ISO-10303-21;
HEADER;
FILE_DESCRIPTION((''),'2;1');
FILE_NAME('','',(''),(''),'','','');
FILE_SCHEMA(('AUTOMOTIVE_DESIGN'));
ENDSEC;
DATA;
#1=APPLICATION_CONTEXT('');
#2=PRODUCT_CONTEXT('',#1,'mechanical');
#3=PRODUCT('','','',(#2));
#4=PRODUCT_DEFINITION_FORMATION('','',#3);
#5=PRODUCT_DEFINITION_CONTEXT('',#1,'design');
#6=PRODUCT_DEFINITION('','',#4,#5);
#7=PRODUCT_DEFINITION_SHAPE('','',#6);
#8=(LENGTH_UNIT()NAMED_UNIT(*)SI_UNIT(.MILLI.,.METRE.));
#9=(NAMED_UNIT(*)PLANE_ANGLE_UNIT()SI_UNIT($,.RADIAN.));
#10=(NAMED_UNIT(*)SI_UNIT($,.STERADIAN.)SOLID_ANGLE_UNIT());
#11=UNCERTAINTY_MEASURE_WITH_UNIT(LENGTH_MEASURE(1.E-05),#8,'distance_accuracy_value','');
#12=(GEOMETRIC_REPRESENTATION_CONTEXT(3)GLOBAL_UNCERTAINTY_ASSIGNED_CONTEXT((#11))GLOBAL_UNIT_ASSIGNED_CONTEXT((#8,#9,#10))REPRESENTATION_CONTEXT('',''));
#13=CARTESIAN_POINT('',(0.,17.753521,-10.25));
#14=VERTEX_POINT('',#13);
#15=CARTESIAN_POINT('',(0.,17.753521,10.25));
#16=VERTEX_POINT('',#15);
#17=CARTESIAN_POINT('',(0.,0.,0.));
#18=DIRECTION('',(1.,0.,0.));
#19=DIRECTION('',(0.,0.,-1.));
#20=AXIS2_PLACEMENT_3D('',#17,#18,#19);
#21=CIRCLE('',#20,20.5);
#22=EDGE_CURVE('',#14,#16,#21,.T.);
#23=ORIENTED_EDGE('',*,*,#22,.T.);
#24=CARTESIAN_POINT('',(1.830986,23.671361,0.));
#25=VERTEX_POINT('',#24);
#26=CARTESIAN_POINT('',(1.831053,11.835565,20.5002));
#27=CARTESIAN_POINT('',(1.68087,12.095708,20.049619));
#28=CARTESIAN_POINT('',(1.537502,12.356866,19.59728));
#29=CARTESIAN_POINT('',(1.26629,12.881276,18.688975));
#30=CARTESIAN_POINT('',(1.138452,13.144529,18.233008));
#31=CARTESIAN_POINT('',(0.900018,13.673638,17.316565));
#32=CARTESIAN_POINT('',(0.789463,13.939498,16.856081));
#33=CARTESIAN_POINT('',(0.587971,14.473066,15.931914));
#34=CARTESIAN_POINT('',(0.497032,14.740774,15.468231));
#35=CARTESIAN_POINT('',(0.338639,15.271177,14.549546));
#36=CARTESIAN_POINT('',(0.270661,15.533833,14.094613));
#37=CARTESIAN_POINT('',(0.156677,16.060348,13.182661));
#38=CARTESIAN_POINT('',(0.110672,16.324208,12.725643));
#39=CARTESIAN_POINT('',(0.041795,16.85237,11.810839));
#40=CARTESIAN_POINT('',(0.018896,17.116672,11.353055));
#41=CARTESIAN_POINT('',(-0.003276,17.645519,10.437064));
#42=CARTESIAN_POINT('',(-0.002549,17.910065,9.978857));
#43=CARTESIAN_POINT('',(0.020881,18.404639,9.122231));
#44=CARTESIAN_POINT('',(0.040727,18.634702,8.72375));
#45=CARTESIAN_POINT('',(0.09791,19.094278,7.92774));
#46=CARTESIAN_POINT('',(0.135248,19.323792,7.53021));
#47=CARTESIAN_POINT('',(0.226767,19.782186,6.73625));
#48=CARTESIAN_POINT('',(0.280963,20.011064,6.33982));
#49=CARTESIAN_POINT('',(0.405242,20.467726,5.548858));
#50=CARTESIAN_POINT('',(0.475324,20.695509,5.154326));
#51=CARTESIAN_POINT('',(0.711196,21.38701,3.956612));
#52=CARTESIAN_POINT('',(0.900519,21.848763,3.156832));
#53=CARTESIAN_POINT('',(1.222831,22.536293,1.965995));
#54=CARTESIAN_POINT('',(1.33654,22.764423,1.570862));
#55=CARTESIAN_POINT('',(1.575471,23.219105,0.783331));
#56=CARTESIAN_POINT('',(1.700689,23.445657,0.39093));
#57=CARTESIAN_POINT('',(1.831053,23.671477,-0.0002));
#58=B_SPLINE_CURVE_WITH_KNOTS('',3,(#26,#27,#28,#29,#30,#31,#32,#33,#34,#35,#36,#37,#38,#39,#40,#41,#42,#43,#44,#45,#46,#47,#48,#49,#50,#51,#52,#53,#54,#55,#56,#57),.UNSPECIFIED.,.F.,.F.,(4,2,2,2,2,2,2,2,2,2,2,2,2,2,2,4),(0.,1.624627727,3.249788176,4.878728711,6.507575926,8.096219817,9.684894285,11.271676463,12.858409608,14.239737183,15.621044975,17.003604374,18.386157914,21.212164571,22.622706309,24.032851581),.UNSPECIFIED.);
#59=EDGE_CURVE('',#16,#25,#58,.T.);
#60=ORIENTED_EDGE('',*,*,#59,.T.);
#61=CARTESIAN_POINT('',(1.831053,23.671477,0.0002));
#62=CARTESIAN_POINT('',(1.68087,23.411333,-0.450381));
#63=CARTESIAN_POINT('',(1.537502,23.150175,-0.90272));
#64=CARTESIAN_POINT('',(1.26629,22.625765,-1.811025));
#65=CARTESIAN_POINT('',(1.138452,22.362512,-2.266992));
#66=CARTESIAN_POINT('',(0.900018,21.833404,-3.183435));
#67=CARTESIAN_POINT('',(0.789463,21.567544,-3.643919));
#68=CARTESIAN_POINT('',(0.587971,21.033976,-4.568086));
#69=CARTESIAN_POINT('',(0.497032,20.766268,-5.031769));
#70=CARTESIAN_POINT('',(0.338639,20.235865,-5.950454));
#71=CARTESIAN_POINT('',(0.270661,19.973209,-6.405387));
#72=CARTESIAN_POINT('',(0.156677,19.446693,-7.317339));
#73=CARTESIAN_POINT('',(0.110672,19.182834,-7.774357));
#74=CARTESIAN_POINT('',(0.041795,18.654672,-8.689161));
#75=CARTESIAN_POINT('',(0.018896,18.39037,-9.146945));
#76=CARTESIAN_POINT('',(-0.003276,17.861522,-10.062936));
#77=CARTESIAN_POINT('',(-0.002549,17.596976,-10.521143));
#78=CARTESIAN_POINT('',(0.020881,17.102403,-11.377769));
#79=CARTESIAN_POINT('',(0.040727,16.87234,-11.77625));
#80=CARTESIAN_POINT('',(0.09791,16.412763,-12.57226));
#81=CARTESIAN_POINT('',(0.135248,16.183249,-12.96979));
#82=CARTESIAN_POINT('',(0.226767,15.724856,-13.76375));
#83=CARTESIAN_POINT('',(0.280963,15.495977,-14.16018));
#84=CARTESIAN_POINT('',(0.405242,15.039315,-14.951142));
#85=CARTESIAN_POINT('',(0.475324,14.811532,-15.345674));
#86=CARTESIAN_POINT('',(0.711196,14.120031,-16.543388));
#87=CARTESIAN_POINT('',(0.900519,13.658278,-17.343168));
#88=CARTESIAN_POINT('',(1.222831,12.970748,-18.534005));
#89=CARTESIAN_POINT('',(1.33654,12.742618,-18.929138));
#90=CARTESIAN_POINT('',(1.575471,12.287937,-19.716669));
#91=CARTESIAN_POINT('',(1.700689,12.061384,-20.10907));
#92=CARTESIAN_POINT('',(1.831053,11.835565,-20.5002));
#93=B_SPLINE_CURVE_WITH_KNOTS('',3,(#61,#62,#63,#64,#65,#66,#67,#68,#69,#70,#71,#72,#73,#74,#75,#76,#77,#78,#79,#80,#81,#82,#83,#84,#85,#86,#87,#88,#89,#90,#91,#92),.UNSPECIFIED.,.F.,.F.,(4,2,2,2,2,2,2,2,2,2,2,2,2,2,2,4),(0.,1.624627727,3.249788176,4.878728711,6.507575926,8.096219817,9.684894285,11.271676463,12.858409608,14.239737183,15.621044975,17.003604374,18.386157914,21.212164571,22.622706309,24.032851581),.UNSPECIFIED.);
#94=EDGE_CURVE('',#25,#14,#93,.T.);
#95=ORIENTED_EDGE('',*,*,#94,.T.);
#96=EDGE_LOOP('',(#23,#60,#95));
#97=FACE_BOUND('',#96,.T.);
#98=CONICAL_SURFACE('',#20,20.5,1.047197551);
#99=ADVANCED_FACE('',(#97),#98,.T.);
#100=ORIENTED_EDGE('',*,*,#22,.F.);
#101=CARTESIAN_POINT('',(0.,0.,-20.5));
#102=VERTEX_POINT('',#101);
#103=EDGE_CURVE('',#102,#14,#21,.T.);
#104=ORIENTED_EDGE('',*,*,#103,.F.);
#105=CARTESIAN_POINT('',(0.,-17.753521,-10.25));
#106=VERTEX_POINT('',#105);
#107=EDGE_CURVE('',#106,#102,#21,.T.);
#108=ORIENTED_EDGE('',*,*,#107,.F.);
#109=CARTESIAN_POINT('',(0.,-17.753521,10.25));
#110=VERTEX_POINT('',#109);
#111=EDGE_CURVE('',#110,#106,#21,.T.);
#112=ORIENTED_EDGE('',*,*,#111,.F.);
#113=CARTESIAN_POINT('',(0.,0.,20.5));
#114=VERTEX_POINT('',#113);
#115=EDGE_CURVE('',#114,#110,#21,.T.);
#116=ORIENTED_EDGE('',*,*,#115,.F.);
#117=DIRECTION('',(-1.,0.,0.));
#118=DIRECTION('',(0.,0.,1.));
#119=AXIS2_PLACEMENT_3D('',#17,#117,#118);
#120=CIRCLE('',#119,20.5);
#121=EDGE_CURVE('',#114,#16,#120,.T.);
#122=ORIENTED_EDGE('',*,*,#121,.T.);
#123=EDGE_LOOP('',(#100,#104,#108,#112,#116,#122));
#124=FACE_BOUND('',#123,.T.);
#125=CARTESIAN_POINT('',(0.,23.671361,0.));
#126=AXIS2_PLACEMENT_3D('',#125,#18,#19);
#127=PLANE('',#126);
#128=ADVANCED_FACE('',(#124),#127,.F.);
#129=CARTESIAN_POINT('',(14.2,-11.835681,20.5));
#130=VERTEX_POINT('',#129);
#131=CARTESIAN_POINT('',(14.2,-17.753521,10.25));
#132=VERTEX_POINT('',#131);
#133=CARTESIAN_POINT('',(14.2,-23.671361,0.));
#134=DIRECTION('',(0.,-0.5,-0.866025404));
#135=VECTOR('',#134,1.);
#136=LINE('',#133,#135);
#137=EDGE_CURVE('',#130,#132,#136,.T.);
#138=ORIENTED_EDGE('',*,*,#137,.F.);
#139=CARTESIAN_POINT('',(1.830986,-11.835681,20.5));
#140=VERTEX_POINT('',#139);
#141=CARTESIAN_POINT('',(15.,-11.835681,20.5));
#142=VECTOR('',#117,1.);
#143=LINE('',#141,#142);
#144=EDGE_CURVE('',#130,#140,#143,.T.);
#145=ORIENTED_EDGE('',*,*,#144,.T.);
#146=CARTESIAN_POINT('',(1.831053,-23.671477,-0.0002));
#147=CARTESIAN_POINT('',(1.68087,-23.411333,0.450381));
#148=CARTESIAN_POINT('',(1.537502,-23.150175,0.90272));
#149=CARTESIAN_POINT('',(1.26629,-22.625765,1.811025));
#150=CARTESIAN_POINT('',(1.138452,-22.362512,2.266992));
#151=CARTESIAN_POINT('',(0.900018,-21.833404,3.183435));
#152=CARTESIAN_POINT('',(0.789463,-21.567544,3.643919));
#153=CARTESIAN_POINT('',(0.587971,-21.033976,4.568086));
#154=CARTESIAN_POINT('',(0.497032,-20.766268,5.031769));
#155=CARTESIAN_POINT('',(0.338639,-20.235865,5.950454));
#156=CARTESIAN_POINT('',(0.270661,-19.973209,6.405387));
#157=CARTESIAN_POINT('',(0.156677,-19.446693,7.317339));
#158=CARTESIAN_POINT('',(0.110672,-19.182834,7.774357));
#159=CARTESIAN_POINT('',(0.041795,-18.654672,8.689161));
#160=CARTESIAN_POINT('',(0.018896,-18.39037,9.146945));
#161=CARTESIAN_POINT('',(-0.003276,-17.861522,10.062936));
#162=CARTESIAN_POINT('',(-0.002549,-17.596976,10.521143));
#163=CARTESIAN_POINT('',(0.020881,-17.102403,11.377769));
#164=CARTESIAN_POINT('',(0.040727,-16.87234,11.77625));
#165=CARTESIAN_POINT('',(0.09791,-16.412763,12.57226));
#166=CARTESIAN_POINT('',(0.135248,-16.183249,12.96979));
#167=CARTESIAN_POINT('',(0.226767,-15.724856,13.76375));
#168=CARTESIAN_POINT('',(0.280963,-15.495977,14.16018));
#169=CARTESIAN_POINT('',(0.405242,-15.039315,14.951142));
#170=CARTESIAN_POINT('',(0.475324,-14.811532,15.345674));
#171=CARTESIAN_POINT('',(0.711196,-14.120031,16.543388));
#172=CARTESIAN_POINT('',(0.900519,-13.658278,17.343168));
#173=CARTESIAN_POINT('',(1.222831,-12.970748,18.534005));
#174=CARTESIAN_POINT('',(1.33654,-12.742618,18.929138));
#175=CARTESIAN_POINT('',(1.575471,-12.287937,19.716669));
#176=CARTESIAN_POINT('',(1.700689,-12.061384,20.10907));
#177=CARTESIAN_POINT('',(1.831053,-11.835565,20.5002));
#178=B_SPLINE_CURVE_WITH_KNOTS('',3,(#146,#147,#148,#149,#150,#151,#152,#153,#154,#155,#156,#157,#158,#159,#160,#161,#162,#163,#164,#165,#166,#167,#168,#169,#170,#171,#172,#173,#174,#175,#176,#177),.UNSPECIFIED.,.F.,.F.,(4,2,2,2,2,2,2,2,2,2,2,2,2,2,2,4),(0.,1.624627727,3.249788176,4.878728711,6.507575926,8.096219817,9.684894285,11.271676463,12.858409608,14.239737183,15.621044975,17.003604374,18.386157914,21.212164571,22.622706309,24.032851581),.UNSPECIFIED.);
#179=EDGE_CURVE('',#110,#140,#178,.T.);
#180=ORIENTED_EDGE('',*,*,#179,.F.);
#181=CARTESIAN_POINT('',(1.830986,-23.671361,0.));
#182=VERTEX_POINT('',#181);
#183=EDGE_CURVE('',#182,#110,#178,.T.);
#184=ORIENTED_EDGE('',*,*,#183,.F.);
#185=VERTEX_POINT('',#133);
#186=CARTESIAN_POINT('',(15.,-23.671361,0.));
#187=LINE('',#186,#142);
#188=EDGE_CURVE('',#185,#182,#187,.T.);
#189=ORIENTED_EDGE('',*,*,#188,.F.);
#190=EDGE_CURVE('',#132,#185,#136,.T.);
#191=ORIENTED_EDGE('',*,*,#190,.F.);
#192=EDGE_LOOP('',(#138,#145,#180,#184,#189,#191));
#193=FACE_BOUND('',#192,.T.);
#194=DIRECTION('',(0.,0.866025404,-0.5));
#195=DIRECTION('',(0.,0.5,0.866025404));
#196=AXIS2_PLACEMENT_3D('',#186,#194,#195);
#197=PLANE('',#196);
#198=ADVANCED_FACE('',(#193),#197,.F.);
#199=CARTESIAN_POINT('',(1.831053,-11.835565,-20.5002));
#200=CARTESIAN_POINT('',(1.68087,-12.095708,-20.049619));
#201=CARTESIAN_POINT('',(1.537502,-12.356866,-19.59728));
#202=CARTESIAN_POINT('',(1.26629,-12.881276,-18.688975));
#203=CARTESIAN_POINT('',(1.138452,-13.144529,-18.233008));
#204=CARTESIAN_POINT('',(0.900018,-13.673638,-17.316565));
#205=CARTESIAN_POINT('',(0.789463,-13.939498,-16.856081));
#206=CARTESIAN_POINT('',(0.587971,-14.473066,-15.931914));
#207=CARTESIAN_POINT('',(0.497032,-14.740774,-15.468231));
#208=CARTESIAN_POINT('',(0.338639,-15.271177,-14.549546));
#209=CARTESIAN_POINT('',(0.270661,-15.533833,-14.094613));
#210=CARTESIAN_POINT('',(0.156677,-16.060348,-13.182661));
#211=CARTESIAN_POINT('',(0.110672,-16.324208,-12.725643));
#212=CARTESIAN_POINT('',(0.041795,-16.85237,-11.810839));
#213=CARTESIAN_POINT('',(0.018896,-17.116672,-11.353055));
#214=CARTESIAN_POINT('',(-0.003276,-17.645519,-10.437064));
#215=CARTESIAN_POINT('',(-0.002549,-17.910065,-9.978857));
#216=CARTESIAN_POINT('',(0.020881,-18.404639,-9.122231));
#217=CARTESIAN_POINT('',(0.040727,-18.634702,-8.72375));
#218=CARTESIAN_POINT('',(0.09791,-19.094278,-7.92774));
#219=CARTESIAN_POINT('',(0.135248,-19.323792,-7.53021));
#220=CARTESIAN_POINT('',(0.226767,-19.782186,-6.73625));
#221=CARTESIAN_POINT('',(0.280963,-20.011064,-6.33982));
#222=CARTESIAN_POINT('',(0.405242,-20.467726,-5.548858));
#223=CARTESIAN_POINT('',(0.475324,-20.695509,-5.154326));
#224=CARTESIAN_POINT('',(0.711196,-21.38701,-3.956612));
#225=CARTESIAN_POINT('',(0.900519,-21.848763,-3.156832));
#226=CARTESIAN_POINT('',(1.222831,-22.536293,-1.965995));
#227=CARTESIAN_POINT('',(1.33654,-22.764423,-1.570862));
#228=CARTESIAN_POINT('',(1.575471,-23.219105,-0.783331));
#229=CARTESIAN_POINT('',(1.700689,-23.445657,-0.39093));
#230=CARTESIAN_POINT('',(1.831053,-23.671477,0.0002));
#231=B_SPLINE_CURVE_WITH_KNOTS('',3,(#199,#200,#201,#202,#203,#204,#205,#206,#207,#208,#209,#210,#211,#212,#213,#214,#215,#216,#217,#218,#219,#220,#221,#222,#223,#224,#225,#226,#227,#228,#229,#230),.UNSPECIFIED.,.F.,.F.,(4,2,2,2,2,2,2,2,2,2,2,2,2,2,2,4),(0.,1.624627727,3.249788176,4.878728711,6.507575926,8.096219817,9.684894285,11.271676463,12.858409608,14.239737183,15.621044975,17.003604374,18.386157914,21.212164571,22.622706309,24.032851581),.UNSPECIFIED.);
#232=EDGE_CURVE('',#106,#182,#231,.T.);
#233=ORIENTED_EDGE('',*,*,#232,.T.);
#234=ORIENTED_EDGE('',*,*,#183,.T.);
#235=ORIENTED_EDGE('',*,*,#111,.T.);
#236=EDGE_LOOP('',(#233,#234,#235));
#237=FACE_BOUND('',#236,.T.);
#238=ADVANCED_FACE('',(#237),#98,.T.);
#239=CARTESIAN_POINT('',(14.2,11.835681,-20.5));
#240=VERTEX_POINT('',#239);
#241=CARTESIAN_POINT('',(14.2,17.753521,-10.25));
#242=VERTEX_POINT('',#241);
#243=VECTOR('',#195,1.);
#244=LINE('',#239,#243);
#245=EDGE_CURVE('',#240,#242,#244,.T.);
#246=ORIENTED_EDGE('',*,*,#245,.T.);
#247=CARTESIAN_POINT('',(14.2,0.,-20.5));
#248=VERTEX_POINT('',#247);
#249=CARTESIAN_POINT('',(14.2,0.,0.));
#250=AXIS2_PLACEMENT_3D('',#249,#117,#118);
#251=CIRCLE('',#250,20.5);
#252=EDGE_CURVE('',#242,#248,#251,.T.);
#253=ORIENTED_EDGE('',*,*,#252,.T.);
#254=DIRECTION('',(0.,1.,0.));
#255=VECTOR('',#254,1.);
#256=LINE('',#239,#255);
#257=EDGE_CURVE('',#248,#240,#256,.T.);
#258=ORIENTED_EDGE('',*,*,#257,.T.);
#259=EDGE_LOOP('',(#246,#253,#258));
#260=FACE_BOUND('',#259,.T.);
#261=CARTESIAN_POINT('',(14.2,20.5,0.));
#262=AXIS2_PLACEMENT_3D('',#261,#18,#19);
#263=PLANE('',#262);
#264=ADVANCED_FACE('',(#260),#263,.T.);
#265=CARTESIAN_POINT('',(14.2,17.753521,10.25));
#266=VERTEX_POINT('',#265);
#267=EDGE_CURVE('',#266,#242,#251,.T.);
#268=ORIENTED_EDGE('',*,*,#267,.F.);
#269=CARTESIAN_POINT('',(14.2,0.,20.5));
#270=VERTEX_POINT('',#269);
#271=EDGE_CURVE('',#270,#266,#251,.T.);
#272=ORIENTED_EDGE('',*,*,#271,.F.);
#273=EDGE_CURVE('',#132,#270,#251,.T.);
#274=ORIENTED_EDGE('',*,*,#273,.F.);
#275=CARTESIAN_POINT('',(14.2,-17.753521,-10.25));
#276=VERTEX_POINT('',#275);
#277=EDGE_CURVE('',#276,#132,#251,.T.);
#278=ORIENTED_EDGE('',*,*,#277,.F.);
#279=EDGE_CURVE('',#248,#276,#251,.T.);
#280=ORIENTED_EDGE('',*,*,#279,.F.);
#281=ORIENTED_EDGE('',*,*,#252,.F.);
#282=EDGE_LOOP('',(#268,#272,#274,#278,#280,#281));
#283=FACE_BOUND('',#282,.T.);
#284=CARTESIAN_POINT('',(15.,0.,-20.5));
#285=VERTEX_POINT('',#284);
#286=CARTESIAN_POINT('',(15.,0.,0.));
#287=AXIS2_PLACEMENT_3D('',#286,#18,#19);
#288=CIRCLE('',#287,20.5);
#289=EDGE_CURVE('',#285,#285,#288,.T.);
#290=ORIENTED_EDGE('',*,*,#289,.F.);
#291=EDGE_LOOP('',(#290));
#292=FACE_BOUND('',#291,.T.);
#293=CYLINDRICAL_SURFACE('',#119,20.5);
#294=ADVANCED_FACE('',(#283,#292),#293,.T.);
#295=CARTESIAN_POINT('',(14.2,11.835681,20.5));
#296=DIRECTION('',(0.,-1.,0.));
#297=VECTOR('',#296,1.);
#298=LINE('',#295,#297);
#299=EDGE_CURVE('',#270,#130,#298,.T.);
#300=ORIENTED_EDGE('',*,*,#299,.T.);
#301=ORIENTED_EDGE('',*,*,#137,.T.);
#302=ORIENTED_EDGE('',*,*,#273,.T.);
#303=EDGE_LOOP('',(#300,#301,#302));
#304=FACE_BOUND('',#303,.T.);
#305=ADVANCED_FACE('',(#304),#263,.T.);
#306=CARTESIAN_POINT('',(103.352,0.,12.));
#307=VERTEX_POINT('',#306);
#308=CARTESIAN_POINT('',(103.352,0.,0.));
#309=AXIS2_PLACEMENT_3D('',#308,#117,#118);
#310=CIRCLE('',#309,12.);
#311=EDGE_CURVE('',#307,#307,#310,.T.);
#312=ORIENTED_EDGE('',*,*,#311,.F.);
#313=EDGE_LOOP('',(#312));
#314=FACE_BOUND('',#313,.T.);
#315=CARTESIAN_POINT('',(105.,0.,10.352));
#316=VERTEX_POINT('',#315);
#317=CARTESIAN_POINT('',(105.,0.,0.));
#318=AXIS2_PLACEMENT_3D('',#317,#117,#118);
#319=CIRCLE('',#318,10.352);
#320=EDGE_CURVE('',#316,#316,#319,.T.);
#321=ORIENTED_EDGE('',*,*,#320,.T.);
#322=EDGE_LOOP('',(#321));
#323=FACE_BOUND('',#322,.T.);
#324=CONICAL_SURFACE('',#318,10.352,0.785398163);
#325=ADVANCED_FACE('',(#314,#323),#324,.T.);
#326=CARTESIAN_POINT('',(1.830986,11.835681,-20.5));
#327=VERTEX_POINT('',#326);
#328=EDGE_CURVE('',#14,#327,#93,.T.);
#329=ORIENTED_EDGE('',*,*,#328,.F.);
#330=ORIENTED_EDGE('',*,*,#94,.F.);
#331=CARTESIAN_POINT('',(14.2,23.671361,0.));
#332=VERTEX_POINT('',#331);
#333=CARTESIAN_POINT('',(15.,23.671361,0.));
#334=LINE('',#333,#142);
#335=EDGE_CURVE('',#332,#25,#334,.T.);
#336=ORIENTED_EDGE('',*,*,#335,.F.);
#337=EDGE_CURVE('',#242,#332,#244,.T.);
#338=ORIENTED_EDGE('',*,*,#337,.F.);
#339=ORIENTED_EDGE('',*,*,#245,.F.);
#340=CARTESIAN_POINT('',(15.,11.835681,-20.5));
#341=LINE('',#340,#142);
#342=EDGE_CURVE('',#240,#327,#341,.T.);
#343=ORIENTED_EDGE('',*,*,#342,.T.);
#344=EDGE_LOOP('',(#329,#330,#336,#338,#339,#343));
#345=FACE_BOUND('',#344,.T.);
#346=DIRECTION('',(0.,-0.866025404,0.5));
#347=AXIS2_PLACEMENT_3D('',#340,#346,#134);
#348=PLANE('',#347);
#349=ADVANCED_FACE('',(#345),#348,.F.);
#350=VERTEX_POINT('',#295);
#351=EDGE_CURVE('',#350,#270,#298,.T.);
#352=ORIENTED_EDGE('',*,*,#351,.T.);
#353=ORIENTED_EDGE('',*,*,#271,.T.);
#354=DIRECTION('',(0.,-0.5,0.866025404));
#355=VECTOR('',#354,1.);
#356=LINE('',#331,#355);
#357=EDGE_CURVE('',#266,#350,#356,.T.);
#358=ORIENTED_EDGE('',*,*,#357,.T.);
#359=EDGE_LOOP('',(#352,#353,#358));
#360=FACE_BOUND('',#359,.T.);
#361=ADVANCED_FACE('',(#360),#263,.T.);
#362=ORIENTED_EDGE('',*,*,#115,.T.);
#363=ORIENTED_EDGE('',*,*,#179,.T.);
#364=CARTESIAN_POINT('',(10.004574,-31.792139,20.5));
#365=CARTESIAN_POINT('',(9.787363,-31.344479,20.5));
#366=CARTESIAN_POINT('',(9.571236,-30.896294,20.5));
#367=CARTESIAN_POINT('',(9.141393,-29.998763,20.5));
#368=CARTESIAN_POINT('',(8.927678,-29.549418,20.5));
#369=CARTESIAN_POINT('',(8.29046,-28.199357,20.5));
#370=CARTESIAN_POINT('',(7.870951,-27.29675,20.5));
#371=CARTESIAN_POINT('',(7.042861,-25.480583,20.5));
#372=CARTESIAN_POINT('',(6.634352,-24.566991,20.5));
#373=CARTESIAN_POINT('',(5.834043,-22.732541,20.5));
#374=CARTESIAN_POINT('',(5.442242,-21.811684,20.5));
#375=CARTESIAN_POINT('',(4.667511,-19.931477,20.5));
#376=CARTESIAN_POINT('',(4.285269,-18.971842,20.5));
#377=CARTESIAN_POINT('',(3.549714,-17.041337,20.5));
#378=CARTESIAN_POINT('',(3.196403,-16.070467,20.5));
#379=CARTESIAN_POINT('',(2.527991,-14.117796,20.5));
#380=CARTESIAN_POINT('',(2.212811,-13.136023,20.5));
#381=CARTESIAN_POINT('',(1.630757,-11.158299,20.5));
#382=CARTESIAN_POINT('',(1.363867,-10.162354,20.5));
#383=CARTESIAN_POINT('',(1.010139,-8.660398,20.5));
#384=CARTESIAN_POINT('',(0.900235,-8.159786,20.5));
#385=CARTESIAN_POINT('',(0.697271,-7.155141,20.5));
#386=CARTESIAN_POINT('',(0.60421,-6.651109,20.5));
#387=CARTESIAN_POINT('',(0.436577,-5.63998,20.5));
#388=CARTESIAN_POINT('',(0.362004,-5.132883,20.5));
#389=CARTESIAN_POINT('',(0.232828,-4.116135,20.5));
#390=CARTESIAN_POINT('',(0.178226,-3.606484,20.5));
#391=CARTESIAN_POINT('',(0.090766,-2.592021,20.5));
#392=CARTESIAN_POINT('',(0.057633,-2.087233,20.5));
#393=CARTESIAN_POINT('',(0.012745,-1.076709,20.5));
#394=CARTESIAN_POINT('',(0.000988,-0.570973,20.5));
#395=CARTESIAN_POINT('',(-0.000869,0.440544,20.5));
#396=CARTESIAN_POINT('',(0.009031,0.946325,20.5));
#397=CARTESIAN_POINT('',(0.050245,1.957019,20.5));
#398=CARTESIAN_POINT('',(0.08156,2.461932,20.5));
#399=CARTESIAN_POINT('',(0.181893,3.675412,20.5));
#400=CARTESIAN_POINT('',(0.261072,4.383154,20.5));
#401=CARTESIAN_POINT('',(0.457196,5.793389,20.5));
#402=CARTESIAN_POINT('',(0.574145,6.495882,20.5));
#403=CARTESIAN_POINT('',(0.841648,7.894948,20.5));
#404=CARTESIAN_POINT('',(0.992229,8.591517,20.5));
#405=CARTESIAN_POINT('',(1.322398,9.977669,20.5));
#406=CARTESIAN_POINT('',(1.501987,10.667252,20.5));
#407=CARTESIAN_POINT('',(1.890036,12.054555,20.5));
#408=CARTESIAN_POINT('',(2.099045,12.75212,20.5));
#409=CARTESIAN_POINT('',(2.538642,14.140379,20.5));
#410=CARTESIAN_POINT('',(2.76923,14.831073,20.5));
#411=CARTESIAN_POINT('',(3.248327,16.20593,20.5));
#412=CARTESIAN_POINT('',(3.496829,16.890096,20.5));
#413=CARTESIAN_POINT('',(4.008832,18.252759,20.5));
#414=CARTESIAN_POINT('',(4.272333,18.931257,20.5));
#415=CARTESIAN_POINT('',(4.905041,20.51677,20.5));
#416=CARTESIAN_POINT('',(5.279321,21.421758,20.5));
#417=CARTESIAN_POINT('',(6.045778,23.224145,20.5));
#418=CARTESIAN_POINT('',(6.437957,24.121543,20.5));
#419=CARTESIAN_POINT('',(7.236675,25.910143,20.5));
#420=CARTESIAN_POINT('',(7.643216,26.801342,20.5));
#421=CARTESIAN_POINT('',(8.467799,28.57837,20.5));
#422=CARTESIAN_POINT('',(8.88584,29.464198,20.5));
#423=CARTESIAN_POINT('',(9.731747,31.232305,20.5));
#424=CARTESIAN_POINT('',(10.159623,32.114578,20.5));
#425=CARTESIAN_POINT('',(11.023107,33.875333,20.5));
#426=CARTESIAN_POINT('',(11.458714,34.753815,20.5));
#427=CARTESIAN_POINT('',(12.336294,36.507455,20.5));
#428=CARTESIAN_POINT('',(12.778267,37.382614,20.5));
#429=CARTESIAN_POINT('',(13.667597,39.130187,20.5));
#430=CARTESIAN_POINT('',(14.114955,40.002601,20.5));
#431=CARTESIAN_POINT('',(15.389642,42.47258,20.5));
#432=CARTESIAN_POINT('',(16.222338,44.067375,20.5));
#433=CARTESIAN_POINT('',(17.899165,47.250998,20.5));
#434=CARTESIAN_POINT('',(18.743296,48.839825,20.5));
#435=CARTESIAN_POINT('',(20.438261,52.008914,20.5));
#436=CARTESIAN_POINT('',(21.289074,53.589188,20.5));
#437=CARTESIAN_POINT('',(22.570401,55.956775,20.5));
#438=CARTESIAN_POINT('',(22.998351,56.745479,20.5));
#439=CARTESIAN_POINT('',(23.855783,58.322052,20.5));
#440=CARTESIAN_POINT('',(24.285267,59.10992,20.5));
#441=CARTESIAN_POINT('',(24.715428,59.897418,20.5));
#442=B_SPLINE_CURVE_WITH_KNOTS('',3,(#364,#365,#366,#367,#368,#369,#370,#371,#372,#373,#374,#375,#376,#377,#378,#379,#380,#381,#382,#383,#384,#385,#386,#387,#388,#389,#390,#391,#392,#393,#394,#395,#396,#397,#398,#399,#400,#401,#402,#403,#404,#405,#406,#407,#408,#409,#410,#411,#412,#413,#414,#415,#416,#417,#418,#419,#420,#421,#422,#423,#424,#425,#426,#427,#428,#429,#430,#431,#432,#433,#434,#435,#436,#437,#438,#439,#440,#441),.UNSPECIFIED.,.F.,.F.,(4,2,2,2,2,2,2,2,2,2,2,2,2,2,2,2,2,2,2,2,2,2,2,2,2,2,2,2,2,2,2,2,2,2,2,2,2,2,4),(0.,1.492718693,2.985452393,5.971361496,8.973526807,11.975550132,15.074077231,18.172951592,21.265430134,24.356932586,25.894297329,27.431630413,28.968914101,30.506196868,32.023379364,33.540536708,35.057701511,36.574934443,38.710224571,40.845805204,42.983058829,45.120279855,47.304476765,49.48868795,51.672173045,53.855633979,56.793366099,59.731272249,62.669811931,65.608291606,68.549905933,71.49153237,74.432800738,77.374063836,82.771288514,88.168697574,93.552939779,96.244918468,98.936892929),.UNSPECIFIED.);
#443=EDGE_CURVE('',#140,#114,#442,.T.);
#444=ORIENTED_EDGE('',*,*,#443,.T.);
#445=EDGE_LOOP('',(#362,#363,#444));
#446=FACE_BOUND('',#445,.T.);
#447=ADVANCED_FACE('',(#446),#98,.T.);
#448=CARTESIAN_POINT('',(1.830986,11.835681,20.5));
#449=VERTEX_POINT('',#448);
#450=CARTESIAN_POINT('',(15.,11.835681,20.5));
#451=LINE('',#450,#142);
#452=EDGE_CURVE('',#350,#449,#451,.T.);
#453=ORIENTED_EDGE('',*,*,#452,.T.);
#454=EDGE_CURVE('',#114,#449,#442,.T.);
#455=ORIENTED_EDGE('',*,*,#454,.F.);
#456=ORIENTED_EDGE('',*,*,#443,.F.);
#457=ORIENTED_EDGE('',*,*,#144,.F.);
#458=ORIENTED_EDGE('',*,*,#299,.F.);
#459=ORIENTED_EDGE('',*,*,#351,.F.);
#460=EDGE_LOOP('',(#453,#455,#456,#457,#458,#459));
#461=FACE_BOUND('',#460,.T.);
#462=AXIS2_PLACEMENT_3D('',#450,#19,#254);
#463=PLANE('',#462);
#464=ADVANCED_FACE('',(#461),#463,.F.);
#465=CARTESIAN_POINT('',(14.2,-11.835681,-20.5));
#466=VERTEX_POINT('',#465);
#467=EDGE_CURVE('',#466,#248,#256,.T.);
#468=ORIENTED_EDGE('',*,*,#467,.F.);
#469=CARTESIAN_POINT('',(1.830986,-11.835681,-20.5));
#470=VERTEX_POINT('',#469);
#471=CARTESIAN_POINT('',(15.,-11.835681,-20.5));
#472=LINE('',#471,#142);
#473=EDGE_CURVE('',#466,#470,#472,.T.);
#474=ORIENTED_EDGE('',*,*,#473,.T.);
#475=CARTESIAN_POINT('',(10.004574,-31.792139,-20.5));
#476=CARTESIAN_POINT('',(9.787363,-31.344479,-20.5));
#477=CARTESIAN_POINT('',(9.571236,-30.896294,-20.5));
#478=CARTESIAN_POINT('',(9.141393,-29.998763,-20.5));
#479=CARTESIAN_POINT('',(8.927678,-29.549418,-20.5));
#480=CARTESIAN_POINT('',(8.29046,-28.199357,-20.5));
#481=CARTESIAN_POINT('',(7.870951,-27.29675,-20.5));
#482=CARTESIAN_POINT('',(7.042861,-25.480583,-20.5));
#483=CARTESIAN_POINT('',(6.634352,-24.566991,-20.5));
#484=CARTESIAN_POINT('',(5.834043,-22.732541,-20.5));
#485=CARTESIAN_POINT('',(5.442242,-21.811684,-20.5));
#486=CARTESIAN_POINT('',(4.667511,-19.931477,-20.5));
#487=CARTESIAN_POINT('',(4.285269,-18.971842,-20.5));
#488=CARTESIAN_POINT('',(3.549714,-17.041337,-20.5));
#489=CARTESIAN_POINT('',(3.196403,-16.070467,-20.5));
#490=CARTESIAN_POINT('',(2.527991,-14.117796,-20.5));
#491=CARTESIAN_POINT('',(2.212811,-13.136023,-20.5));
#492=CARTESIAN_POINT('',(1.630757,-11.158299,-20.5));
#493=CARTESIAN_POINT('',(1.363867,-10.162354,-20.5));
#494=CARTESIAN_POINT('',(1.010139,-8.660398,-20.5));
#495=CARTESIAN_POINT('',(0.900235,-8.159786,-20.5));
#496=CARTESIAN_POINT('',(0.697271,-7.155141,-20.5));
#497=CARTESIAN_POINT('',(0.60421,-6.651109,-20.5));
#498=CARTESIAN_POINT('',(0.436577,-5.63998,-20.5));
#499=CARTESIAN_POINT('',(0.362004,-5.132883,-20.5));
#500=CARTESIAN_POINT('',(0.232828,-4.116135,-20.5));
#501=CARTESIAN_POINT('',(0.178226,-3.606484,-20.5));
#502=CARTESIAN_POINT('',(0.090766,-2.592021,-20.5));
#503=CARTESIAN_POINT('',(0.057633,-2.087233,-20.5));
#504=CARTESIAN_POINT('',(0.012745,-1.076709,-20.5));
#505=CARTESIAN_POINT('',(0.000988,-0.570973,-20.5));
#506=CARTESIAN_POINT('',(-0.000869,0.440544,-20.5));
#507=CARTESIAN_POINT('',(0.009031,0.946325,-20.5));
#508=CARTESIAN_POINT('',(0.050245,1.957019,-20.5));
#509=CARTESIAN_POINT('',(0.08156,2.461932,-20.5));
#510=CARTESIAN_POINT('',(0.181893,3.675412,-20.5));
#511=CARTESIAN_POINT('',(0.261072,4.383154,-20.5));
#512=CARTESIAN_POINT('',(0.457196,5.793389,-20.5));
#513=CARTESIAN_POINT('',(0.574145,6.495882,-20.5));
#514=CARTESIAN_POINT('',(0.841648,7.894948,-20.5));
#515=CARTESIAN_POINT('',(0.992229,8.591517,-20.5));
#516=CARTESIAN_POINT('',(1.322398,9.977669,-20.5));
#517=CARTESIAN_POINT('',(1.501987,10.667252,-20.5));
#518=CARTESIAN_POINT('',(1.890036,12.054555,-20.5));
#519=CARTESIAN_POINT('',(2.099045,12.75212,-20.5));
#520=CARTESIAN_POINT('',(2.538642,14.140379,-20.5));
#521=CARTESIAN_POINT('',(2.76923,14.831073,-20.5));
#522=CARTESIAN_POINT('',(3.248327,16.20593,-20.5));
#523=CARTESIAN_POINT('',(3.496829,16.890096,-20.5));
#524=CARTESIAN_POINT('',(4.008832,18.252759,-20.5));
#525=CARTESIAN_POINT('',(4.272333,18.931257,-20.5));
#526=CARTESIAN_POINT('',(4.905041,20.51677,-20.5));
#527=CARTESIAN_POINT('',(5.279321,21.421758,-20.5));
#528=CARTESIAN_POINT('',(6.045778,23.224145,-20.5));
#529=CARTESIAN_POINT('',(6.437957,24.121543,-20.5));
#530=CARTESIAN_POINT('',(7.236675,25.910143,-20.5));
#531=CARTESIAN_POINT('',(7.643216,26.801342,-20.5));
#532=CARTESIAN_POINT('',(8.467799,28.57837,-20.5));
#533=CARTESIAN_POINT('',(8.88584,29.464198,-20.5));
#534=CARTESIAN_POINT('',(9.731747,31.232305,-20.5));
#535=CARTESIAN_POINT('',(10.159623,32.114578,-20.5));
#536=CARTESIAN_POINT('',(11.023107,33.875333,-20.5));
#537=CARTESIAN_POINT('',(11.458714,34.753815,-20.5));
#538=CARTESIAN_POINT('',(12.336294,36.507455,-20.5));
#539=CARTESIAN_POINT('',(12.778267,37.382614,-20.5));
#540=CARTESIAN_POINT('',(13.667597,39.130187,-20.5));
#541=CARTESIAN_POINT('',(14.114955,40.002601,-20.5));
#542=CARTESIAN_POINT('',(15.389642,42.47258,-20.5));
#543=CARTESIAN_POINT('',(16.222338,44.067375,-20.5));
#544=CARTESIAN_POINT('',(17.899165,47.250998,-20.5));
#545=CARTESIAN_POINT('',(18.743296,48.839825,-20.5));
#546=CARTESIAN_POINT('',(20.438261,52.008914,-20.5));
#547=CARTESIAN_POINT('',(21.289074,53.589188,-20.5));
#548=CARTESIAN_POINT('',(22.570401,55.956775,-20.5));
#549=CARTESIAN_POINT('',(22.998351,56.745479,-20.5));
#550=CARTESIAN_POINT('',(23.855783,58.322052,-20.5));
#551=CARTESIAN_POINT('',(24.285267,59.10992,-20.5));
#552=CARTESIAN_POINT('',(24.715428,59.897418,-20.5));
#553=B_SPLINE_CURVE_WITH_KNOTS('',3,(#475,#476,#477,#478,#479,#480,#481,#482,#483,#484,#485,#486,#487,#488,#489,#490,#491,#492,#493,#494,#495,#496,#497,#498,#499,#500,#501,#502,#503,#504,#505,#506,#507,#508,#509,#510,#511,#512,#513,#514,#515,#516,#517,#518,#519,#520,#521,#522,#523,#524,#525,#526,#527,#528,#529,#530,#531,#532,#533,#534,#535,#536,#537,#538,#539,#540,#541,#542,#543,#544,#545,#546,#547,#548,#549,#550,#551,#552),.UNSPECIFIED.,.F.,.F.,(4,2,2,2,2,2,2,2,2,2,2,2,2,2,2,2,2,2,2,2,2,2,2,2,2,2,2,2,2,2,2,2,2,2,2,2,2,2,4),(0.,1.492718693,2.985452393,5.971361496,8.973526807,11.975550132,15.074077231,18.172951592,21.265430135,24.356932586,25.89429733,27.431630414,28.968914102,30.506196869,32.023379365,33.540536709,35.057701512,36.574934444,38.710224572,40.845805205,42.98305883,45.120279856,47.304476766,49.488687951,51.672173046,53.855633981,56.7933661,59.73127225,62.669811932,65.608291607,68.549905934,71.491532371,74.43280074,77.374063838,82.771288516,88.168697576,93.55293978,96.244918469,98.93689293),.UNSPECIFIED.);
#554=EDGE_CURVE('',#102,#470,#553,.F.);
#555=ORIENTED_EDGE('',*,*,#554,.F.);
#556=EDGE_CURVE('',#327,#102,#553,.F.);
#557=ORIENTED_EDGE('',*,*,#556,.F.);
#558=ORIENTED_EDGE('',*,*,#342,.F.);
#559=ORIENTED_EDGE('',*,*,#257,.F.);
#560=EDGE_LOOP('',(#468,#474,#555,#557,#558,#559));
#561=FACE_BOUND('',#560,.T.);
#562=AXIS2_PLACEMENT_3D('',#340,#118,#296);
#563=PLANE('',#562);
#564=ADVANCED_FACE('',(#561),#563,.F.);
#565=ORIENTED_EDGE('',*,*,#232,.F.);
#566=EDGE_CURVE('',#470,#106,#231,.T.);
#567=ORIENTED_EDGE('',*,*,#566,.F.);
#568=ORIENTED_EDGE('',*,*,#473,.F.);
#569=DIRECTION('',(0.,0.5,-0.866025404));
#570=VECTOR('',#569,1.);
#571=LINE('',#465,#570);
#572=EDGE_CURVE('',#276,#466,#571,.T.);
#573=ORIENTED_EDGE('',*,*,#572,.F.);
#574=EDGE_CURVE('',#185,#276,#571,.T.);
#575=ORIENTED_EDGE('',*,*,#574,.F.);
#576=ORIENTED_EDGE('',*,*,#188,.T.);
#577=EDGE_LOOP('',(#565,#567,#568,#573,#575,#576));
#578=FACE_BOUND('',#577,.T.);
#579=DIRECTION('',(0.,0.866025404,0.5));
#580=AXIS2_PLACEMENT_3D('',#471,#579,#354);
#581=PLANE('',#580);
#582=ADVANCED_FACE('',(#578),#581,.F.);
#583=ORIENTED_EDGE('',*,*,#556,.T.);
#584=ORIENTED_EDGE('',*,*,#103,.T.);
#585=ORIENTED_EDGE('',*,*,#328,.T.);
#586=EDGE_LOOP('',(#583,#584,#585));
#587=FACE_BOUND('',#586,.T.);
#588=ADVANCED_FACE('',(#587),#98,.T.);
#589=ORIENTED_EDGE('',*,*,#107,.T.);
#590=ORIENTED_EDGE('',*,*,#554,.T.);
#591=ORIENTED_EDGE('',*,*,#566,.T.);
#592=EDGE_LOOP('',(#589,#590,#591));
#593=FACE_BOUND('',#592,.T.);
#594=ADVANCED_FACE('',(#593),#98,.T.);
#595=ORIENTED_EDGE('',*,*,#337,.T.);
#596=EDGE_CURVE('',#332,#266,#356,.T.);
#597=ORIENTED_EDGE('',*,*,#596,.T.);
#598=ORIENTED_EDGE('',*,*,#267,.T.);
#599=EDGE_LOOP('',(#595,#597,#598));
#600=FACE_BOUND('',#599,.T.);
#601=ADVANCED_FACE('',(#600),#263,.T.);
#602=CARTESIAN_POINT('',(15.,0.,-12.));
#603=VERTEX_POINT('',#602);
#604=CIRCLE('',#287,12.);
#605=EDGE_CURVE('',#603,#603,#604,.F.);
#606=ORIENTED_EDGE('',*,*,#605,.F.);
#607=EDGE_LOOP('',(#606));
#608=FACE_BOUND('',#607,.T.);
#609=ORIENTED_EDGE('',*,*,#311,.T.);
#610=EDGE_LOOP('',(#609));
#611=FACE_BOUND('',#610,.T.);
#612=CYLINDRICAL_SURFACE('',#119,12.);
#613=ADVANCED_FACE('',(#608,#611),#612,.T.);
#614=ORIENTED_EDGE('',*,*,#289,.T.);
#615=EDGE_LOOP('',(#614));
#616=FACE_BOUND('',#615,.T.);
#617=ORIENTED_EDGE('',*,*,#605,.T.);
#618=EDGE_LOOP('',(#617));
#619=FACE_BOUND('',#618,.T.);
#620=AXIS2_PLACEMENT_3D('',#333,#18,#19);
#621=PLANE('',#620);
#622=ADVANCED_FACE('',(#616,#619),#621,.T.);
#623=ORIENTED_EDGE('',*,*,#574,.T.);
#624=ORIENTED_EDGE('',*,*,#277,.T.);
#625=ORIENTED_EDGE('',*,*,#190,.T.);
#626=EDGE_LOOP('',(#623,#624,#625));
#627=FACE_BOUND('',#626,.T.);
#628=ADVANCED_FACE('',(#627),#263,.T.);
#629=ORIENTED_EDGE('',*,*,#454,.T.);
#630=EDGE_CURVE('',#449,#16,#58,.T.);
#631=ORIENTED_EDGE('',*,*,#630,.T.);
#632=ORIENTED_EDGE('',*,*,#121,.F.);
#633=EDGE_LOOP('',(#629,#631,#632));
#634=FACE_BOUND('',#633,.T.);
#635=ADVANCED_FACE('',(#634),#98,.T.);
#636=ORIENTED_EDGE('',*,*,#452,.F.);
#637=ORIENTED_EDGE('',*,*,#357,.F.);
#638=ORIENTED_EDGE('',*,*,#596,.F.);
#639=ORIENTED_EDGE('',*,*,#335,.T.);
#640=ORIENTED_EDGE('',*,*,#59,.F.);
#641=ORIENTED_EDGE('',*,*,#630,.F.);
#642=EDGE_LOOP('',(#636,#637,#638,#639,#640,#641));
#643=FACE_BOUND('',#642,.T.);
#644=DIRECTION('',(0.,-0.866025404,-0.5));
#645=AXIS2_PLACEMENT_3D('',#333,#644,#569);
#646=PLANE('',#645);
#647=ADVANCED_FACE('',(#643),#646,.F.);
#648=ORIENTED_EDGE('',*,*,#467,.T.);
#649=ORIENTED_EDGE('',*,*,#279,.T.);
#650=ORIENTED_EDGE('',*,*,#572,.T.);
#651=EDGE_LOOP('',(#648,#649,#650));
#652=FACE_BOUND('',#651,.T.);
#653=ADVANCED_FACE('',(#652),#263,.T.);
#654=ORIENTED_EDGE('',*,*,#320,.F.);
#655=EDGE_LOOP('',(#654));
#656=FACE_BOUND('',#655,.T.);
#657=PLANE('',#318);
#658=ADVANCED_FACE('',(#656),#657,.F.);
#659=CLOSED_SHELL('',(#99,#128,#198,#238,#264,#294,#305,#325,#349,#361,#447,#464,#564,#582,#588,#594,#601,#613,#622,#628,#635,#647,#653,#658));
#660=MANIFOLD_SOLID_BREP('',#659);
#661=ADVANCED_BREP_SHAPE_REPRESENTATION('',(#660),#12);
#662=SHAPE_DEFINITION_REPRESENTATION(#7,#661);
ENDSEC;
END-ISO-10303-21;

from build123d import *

# Parameters (mm, degrees)
BASEHEAD_DEPTH = 15
SKETCH4_W      = 0.8
SKETCH4_H      = 13.171361037


# Read off the part's stored shape, not the designer's step: HeadChamfer
with BuildPart() as part:
    # Sketch1 → BaseHead (new body)
    with BuildSketch(Plane(origin=(0, 0, 0), x_dir=(0, 0, -1), z_dir=(1, 0, 0))):
        Polygon((20.5, 11.835680518), (20.5, -11.835680518), (0, -23.671361037), (-20.5, -11.835680518), (-20.5, 11.835680518), (0, 23.671361037), align=None)
    extrude(amount=BASEHEAD_DEPTH)

    # HeadChamfer outline → HeadChamfer (revolve, cut)
    with BuildSketch(Plane.YX):
        Polygon((23.671361268, 1.830986282), (20.499999702, -1.72e-07), (23.671361268, -1.72e-07), align=None)
    revolve(axis=Axis((0, 0, 0), (1, 0, 0)), mode=Mode.SUBTRACT)

    # HeadChamfer 2 outline → HeadChamfer 2 (revolve)
    with BuildSketch(Plane.YX):
        Polygon((12, 15), (12, 103.352), (10.352, 105), (0, 105), (0, 15), align=None)
    revolve(axis=Axis((0, 0, 0), (1, 0, 0)))

    # Sketch4 → BearingFace (revolve, cut)
    with BuildSketch(Plane.XY, mode=Mode.PRIVATE) as bearingface_sk:
        with Locations((14.6, 27.085680519)):
            Rectangle(SKETCH4_W, SKETCH4_H)
    revolve(bearingface_sk.sketch.rotate(Axis((0, 0, 0), (1, 0, 0)), 90), axis=Axis((0, 0, 0), (1, 0, 0)), mode=Mode.SUBTRACT)


solid = part.part
